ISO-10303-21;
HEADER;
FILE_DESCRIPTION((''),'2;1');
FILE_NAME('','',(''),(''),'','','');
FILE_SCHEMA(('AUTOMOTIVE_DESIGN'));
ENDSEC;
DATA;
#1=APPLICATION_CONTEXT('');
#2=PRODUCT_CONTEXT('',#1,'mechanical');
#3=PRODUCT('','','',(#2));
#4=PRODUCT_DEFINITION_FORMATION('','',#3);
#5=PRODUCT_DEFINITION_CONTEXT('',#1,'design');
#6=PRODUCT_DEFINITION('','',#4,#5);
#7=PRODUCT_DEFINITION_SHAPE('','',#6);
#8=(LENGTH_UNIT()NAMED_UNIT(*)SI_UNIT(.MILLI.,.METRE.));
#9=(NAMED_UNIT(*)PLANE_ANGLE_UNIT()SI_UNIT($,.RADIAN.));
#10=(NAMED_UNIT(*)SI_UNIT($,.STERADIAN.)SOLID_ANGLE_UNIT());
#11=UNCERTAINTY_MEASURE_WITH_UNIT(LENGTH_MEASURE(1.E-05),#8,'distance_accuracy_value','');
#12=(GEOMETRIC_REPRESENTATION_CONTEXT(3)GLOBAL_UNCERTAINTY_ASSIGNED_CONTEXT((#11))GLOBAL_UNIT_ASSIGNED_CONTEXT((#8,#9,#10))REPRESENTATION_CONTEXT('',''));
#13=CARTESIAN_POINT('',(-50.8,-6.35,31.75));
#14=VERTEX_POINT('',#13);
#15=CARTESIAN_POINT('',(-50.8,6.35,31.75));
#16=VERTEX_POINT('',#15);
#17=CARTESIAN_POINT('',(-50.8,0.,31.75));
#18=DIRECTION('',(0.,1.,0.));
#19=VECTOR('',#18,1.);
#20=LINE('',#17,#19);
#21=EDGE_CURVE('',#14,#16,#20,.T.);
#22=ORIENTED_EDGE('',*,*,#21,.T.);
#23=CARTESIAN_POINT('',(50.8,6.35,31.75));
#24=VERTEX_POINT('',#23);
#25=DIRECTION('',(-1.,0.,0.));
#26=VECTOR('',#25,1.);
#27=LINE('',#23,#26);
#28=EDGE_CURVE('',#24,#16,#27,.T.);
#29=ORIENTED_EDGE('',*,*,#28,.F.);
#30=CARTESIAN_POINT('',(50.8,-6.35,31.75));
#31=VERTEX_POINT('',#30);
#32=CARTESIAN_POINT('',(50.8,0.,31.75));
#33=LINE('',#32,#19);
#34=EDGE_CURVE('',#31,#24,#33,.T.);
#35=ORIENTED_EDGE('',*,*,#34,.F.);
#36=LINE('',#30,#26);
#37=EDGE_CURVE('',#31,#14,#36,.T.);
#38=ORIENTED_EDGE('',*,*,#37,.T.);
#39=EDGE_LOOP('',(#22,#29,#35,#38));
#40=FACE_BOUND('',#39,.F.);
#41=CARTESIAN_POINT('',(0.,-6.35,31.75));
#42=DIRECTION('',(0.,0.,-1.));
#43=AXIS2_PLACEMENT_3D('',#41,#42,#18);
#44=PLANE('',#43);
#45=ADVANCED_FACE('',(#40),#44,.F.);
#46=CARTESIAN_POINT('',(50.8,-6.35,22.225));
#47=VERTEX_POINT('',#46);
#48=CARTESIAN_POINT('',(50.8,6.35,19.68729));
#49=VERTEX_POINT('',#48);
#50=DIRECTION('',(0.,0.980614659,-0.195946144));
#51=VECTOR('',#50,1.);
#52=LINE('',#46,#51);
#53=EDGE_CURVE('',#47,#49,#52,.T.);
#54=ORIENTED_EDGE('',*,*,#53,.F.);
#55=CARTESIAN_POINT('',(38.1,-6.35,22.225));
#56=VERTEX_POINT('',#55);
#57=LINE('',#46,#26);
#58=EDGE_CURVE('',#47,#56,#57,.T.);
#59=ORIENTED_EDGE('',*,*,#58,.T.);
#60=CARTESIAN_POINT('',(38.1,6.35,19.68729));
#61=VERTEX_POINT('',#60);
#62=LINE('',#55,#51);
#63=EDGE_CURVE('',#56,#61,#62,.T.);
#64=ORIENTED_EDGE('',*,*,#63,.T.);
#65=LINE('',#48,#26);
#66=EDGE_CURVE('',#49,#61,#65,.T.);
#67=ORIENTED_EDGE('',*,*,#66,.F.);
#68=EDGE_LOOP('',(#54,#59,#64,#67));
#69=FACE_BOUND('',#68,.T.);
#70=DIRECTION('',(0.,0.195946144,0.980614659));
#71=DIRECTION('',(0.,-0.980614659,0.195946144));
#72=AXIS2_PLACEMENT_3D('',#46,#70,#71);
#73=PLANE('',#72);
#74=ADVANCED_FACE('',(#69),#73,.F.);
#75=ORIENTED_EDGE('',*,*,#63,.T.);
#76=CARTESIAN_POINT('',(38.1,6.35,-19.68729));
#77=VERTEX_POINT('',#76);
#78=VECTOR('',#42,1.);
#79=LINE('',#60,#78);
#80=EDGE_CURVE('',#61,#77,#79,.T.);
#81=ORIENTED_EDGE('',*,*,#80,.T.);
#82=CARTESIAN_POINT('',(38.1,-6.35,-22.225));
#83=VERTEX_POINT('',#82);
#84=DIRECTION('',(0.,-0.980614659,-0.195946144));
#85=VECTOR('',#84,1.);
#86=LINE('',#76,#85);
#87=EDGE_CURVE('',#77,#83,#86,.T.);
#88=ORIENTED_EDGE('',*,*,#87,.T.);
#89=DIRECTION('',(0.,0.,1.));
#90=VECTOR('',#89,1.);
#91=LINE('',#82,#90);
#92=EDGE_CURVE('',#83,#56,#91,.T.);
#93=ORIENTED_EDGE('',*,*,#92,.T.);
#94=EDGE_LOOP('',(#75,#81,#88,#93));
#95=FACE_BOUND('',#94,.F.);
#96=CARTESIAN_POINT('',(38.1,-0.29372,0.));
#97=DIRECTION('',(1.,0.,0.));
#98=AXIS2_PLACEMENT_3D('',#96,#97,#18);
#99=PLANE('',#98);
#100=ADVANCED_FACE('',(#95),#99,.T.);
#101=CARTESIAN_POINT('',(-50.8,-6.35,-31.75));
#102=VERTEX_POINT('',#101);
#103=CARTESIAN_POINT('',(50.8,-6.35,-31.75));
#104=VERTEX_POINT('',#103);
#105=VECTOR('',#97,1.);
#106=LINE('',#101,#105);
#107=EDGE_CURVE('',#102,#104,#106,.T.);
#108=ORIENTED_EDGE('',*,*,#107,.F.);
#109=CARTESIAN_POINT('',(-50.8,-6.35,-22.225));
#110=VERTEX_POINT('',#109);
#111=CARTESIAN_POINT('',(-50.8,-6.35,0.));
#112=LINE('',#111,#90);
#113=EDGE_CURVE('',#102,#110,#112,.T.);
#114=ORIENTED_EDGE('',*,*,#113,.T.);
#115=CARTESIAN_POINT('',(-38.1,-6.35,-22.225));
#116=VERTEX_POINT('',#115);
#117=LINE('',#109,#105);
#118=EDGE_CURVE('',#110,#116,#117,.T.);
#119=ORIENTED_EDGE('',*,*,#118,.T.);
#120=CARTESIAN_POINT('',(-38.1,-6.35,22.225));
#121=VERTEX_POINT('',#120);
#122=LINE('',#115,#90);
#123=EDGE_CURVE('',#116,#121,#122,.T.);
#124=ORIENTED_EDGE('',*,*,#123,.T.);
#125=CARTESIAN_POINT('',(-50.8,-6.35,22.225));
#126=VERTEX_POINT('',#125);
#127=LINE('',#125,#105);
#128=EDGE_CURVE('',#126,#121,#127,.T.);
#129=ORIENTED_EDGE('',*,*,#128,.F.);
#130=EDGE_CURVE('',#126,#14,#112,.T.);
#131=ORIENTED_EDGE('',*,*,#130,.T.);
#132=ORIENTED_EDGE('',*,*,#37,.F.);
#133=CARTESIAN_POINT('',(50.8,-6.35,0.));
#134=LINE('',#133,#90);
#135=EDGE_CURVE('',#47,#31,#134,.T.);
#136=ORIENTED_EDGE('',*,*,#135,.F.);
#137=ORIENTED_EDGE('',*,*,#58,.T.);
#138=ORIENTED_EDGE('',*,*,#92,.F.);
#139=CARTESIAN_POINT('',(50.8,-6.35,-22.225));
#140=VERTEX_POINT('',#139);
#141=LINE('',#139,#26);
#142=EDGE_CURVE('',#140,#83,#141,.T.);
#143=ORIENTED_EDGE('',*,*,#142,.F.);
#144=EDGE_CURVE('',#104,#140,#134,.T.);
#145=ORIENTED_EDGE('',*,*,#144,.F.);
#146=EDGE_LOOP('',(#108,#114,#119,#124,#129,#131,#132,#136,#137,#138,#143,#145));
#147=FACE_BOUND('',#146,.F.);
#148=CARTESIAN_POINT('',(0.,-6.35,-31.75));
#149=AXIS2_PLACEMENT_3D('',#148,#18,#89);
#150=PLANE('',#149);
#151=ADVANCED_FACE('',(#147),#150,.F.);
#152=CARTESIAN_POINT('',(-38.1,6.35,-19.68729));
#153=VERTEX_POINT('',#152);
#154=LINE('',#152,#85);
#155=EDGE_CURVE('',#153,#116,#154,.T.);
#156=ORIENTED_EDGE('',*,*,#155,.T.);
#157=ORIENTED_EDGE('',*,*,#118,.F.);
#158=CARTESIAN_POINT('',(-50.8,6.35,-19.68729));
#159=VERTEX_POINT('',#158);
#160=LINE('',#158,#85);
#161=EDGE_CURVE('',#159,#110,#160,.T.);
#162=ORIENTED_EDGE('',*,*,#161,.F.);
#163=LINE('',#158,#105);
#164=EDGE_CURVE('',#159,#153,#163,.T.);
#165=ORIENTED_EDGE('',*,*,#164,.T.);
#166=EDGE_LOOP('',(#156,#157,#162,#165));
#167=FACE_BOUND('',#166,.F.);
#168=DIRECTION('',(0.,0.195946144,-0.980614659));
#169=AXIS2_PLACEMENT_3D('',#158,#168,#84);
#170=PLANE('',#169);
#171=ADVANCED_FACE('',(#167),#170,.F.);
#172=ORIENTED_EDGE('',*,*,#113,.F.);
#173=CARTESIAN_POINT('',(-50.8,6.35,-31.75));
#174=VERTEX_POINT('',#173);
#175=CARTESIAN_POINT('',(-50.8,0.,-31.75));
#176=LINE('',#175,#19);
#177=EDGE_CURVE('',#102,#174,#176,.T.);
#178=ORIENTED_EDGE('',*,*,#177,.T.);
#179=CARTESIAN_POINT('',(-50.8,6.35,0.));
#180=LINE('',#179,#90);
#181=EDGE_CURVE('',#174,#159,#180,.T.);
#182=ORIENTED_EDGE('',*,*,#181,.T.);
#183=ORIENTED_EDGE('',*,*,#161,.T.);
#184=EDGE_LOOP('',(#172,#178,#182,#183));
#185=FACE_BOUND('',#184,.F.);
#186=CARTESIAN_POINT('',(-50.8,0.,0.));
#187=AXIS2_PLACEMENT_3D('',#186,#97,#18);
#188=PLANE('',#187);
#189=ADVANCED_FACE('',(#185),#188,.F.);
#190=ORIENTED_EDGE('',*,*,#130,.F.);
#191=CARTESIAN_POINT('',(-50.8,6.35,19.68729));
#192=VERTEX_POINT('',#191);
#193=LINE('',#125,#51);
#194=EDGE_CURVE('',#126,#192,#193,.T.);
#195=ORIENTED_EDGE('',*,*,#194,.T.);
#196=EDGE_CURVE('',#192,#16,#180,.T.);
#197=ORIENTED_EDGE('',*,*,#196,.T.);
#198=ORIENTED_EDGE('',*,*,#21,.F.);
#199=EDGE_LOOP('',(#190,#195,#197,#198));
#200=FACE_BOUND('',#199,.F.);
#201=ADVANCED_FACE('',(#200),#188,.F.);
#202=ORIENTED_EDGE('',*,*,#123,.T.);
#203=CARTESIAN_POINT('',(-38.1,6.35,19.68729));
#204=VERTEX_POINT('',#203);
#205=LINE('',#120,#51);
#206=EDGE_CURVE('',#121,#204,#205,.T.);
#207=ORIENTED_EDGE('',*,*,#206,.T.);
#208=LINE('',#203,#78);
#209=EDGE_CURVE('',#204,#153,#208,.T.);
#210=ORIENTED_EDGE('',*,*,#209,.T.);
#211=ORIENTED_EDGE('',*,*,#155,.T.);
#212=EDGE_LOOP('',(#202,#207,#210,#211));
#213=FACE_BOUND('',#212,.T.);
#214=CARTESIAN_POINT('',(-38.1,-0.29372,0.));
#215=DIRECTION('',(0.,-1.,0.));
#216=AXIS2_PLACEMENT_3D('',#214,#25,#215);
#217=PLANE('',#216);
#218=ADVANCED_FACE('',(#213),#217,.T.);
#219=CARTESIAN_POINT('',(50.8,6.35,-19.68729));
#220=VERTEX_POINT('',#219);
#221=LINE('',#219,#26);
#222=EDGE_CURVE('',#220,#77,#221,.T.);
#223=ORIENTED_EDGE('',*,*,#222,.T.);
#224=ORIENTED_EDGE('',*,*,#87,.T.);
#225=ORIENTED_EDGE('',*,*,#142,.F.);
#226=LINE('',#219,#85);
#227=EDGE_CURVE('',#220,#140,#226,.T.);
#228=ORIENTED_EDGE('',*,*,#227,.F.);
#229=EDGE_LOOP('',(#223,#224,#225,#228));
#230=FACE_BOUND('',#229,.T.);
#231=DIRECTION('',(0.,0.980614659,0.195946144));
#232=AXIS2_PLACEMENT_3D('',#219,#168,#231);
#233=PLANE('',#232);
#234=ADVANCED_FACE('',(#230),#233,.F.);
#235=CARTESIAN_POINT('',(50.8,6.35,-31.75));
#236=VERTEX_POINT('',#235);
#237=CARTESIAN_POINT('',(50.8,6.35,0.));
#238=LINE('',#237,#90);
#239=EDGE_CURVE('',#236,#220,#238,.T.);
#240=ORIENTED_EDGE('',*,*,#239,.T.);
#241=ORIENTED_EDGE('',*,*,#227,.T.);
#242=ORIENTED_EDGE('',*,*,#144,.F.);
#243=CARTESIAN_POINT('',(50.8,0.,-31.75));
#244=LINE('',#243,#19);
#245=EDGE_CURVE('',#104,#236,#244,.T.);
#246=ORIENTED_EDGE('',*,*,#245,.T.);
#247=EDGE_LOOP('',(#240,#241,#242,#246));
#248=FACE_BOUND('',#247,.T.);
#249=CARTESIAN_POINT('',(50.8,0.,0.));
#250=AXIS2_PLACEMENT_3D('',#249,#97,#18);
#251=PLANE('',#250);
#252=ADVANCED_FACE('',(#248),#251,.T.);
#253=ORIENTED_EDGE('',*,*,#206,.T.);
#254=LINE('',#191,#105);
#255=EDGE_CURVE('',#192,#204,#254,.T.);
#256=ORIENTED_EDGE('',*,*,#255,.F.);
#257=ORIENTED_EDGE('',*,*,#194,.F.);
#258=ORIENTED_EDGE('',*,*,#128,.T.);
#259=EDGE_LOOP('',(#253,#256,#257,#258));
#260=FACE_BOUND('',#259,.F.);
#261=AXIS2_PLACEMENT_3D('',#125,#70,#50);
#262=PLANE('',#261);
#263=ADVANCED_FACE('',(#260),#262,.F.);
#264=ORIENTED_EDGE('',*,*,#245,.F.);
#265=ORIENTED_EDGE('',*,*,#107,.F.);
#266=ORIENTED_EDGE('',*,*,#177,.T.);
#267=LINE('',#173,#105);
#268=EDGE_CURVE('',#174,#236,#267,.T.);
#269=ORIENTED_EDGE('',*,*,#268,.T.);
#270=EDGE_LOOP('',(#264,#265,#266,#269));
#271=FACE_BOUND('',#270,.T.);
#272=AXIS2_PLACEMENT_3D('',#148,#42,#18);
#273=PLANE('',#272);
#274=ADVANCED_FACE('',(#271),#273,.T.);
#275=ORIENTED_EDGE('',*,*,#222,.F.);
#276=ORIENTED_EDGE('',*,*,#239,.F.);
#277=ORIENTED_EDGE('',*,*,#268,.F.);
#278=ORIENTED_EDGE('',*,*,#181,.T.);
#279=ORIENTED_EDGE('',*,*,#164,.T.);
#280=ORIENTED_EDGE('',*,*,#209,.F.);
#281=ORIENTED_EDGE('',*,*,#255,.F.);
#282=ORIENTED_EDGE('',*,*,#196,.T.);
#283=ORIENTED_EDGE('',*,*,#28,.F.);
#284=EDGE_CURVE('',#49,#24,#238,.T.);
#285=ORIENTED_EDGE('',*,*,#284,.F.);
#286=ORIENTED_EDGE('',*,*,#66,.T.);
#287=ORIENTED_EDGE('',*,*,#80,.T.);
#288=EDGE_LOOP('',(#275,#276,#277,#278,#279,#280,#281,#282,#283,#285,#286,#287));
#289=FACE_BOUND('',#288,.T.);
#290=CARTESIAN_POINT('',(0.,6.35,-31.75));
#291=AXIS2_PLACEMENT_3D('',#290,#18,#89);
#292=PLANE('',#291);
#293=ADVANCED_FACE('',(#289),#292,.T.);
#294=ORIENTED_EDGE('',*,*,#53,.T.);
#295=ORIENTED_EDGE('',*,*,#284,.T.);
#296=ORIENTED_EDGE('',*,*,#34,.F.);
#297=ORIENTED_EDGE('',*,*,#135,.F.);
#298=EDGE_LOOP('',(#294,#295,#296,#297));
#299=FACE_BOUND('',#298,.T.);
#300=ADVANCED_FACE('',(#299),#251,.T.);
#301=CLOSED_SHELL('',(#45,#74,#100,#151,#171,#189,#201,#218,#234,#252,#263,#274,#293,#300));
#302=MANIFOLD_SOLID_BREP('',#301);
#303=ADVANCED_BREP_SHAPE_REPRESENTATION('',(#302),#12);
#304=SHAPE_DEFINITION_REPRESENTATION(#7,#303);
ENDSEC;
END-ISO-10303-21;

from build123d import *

# Parameters (mm, degrees)
F0_W     = 12.7
F0_H     = 63.5
F1_DEPTH = 50.8
F3_DEPTH = 12.7


# Not quite as in the source:
# - a pattern or mirror of a feature is missing from the dataset's text; its kind, count and spacing are read off the source's solid


with BuildPart() as f1:
    # F0 (on Right) → F1 (new body, symmetric)
    with BuildSketch(Plane.YZ):
        Rectangle(F0_W, F0_H)
    extrude(amount=F1_DEPTH, both=True)

    # F2 (on face) → F3 (cut)
    with BuildSketch(Plane(origin=(-50.8, 0, 0), x_dir=(0, -1, 0), z_dir=(-1, 0, 0))):
        Polygon((6.35, -22.225), (6.35, 22.225), (-6.35, 19.6872895852), (-6.35, -19.6872895852), align=None)
    f3 = extrude(amount=-F3_DEPTH, mode=Mode.SUBTRACT)

    # F3_copies: F3 across plane
    add(f3.mirror(Plane(origin=(0, 0, 0), x_dir=(0, 0, 1), z_dir=(1, 0, 0))), mode=Mode.SUBTRACT)


solid = f1.part
